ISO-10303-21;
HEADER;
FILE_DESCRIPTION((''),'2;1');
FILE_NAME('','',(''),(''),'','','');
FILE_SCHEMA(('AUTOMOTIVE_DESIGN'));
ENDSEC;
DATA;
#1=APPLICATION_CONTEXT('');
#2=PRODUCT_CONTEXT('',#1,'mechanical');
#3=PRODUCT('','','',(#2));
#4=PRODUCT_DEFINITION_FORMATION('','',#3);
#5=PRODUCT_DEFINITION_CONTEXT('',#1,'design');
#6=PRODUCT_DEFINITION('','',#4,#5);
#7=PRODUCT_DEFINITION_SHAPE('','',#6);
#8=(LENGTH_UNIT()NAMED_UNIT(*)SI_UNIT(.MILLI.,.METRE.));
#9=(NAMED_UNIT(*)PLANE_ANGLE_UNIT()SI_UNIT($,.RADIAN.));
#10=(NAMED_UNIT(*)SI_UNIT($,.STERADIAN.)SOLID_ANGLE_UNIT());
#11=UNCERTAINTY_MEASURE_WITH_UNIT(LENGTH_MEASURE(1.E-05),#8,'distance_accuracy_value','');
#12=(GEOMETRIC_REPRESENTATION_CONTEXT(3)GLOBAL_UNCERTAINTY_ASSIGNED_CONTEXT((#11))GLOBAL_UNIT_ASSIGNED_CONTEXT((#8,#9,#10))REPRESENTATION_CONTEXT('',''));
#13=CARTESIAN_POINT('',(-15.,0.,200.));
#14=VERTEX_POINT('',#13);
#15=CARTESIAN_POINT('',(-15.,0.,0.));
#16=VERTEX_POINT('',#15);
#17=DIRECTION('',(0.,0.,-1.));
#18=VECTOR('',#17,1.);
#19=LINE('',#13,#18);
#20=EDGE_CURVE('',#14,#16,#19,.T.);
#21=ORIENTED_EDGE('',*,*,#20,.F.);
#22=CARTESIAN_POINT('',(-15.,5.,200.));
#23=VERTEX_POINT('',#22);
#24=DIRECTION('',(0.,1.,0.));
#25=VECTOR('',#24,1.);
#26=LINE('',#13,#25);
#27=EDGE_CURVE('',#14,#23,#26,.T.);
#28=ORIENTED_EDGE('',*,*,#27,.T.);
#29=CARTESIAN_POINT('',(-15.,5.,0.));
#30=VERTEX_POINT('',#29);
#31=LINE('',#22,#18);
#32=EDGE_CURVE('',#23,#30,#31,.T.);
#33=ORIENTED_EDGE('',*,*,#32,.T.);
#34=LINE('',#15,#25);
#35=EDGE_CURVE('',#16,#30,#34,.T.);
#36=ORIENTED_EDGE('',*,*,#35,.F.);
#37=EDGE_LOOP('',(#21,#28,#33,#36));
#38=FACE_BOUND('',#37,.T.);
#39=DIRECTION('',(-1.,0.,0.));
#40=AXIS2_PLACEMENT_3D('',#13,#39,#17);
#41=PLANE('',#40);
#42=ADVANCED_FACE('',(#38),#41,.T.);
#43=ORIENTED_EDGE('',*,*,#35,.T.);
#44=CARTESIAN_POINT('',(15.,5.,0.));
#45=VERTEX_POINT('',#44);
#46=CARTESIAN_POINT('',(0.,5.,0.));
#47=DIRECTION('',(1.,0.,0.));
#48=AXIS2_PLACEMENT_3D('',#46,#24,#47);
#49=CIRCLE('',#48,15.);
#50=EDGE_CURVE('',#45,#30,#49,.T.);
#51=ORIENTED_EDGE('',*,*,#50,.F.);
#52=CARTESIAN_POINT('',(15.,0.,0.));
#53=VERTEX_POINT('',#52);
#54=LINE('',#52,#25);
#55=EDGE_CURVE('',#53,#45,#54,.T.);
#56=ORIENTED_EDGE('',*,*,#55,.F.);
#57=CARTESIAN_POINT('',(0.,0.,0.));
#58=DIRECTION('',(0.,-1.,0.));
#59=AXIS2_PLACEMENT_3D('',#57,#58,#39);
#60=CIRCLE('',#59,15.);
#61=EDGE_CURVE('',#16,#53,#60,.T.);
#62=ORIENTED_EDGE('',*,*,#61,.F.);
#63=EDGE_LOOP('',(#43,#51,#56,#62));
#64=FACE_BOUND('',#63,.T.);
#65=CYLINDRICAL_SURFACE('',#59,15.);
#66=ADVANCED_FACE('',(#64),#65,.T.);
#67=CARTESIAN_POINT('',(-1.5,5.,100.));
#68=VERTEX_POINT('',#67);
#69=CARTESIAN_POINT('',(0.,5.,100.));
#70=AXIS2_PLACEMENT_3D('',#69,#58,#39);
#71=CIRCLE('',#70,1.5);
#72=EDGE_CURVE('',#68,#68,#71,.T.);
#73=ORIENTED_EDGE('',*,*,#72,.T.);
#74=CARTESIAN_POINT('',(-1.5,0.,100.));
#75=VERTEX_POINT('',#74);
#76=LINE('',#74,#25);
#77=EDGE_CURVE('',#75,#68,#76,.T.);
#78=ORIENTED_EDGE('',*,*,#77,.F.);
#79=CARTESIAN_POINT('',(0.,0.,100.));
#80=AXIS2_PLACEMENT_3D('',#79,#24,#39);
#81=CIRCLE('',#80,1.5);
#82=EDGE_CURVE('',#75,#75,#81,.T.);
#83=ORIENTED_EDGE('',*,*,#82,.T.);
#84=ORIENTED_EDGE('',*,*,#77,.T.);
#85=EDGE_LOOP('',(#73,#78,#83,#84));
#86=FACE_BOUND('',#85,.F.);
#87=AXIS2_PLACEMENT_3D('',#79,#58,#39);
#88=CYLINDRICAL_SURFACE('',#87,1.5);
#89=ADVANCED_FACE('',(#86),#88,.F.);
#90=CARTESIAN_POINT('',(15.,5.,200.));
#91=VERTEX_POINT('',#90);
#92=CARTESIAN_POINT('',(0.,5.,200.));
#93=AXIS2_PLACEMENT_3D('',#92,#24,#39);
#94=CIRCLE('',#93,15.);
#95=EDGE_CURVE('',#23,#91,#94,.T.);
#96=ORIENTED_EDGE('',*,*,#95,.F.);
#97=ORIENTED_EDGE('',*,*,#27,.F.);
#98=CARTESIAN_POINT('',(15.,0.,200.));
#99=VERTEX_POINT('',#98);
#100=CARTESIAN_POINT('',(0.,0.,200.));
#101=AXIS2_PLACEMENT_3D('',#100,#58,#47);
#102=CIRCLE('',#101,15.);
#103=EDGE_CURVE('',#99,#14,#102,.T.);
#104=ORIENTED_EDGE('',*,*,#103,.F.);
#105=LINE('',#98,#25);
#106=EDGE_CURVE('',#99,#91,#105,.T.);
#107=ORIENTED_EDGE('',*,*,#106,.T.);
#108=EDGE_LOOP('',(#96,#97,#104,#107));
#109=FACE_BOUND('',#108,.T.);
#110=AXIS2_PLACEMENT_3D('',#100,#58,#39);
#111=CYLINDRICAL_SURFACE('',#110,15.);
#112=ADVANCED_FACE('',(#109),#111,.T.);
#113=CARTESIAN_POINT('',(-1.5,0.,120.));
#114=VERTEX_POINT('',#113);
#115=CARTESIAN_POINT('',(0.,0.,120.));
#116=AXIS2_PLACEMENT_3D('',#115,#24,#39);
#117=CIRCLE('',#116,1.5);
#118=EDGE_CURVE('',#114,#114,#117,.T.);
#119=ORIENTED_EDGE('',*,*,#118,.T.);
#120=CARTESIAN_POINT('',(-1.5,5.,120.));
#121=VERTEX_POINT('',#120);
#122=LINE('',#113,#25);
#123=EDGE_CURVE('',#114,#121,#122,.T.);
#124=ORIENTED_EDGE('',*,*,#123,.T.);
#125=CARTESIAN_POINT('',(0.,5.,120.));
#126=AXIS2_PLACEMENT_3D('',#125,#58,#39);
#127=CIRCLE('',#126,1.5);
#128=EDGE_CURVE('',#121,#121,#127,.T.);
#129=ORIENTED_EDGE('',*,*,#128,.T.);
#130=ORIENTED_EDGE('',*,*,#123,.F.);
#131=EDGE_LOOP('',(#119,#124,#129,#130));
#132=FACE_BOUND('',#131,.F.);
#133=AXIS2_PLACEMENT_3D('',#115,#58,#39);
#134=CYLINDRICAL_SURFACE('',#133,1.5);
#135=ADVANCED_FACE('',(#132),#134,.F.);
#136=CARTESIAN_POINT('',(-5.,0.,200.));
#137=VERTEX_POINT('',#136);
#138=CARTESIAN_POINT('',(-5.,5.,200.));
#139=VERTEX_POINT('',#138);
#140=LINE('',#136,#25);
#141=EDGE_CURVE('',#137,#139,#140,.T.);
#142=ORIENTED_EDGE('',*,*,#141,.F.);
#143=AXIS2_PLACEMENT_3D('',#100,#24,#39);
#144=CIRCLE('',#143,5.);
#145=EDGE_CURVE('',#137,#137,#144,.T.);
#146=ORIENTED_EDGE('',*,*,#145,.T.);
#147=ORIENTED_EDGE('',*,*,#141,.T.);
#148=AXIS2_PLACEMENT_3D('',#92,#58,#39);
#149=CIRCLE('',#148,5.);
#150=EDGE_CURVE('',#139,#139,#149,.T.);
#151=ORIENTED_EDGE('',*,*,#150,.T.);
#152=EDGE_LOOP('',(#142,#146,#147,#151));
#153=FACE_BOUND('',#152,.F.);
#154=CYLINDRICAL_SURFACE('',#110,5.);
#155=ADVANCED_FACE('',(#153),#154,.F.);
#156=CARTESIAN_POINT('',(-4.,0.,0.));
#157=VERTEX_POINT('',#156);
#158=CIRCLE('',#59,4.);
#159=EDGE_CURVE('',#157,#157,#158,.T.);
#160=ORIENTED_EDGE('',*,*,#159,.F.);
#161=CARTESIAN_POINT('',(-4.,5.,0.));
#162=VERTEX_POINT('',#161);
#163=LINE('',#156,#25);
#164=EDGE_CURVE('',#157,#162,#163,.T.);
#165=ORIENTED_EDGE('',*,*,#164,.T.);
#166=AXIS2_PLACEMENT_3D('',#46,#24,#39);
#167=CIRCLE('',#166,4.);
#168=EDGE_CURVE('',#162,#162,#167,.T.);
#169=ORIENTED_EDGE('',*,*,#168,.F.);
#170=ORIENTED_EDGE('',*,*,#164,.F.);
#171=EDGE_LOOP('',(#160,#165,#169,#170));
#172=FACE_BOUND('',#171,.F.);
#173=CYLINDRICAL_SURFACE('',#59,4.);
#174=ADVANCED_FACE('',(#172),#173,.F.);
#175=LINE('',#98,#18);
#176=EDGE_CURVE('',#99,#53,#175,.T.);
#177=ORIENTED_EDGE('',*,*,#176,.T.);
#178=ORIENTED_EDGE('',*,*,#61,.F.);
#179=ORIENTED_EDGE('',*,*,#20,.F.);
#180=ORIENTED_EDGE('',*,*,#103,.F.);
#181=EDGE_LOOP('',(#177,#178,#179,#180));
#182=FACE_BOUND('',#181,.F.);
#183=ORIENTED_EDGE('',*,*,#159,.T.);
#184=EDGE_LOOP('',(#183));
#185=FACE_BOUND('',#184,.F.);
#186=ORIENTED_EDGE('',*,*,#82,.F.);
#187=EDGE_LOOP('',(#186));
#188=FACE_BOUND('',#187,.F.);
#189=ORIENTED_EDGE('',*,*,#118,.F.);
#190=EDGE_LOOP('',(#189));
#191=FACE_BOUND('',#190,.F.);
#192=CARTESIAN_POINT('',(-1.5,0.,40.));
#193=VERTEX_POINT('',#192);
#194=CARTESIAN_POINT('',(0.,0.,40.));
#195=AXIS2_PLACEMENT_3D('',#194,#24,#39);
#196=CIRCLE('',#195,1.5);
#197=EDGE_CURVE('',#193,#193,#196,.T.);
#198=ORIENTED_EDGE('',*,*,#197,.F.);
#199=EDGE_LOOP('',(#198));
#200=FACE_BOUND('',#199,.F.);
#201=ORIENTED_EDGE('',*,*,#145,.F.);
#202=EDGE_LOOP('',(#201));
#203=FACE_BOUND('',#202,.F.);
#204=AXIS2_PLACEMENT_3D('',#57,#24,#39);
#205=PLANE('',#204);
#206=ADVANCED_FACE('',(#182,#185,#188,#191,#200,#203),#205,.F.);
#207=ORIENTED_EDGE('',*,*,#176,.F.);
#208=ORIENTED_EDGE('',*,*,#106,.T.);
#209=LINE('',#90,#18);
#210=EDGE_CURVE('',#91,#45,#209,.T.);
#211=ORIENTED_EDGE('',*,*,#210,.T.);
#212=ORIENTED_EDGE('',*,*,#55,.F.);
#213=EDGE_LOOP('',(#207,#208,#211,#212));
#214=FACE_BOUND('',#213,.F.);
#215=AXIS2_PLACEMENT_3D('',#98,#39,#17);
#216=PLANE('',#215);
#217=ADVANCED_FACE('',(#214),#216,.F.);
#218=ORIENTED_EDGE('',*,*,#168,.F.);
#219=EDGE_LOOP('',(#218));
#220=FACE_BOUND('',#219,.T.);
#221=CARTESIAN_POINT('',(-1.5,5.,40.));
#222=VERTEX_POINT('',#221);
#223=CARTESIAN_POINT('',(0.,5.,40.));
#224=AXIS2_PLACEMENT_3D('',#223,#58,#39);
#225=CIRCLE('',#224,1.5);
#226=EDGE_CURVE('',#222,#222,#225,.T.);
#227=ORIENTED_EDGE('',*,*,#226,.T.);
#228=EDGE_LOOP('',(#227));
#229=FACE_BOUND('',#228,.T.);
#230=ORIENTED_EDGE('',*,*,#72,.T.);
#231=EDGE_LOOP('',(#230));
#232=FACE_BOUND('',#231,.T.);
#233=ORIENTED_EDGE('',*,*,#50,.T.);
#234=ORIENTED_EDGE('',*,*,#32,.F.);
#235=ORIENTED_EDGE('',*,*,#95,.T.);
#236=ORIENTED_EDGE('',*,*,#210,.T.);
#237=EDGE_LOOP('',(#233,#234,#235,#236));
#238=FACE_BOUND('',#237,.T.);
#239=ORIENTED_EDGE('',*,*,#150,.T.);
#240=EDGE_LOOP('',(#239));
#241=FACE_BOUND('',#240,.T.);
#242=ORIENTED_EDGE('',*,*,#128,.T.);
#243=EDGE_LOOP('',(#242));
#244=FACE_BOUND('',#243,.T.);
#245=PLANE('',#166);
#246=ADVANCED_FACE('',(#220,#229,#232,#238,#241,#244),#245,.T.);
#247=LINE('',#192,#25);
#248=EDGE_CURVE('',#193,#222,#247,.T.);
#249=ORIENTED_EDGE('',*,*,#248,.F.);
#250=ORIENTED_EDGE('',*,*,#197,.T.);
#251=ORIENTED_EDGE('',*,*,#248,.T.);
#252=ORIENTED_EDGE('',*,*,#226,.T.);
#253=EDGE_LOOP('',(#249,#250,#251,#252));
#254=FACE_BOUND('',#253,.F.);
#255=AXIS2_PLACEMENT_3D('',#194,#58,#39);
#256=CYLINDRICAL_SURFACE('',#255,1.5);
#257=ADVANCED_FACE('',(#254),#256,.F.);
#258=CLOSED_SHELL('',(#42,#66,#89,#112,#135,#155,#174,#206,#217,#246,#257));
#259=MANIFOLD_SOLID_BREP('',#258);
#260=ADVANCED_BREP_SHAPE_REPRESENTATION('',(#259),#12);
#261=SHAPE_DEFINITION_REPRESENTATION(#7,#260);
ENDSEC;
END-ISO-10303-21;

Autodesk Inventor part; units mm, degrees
ref_plane "YZ Plane" through (0, 0, 0) normal (1, 0, 0) x (0, 1, 0)
ref_plane "XZ Plane" through (0, 0, 0) normal (0, 1, 0) x (-1, 0, 0)
ref_plane "XY Plane" through (0, 0, 0) normal (0, 0, 1) x (1, 0, 0)
sketch "Sketch1" plane through (0, 0, 0) normal (0, 1, 0) x (-1, 0, 0)
  circle A0 centre (0, 0) radius 4
  circle A1 centre (0, 200) radius 15
  circle A2 centre (0, 200) radius 5
  circle A3 centre (0, 0) radius 15
  line L0 (15, 200) -> (15, 0)
  line L1 (-15, 200) -> (-15, 0)
  line L2 (0, 160) -> (0, 110) construction
  line L3 (4, 160) -> (4, 110)
  line L4 (-4, 110) -> (-4, 160)
  arc A4 (4, 160) -> (-4, 160) centre (0, 160) ccw
  arc A5 (-4, 110) -> (4, 110) centre (0, 110) ccw
  line L5 (0, -61) -> (0, 261) projected
  line L6 (4, 90) -> (4, 40)
  arc A6 (4, 90) -> (-4, 90) centre (0, 90) ccw
  line L7 (-4, 40) -> (-4, 90)
  arc A7 (-4, 40) -> (4, 40) centre (0, 40) ccw
  circle A8 centre (0, 175) radius 1.5
  circle A9 centre (0, 100) radius 1.5
  circle A10 centre (0, 120) radius 1.5
  circle A11 centre (0, 40) radius 1.5
  point P0 (0, 135)
  point P1 (-7, 0)
  point P2 (7, 0)
  point P3 (0, 121.5)
  point P4 (0, 118.5)
  dimension "d0" = 8
  dimension "d1" = 30
  dimension "d2" = 200
  dimension "d3" = 10
  dimension "d4" = 30
  dimension "d16" = 8
  dimension "d18" = 50
  dimension "d20" = 14
  dimension "d21" = 7
  dimension "d31" = 65
  dimension "d34" = 70
  dimension "d39" = 40
  dimension "d40" = 40
  dimension "d41" = 75
  dimension "d44" = 3
  dimension "d45" = 3
  dimension "d46" = 3
  dimension "d47" = 25
  dimension "d48" = 3
  dimension "d50" = 40
  dimension "d51" = 100
  dimension "d52" = 120
extrude "Extrusion1" add sketch "Sketch1" along normal blind 5 contours A0 L5 A3 | A0 L5 A3 | L5 A7 L6 A6 A9 A5 L3 A4 A8 A1 L0 A3 | A3 L1 A1 L5 A8 A4 L4 A5 A9 A6 L7 A7 | A7 L7 A6 L5 A11 | L5 A11 A6 L6 A7 | A1 L5 A2 | A1 L5 A2 | A8 L5 | L5 A8 | L5 A10 A5 L4 A4 | A4 L3 A5 L5 A10
properties part number "Canh_Tay_1" material "Nylon 6/6"
